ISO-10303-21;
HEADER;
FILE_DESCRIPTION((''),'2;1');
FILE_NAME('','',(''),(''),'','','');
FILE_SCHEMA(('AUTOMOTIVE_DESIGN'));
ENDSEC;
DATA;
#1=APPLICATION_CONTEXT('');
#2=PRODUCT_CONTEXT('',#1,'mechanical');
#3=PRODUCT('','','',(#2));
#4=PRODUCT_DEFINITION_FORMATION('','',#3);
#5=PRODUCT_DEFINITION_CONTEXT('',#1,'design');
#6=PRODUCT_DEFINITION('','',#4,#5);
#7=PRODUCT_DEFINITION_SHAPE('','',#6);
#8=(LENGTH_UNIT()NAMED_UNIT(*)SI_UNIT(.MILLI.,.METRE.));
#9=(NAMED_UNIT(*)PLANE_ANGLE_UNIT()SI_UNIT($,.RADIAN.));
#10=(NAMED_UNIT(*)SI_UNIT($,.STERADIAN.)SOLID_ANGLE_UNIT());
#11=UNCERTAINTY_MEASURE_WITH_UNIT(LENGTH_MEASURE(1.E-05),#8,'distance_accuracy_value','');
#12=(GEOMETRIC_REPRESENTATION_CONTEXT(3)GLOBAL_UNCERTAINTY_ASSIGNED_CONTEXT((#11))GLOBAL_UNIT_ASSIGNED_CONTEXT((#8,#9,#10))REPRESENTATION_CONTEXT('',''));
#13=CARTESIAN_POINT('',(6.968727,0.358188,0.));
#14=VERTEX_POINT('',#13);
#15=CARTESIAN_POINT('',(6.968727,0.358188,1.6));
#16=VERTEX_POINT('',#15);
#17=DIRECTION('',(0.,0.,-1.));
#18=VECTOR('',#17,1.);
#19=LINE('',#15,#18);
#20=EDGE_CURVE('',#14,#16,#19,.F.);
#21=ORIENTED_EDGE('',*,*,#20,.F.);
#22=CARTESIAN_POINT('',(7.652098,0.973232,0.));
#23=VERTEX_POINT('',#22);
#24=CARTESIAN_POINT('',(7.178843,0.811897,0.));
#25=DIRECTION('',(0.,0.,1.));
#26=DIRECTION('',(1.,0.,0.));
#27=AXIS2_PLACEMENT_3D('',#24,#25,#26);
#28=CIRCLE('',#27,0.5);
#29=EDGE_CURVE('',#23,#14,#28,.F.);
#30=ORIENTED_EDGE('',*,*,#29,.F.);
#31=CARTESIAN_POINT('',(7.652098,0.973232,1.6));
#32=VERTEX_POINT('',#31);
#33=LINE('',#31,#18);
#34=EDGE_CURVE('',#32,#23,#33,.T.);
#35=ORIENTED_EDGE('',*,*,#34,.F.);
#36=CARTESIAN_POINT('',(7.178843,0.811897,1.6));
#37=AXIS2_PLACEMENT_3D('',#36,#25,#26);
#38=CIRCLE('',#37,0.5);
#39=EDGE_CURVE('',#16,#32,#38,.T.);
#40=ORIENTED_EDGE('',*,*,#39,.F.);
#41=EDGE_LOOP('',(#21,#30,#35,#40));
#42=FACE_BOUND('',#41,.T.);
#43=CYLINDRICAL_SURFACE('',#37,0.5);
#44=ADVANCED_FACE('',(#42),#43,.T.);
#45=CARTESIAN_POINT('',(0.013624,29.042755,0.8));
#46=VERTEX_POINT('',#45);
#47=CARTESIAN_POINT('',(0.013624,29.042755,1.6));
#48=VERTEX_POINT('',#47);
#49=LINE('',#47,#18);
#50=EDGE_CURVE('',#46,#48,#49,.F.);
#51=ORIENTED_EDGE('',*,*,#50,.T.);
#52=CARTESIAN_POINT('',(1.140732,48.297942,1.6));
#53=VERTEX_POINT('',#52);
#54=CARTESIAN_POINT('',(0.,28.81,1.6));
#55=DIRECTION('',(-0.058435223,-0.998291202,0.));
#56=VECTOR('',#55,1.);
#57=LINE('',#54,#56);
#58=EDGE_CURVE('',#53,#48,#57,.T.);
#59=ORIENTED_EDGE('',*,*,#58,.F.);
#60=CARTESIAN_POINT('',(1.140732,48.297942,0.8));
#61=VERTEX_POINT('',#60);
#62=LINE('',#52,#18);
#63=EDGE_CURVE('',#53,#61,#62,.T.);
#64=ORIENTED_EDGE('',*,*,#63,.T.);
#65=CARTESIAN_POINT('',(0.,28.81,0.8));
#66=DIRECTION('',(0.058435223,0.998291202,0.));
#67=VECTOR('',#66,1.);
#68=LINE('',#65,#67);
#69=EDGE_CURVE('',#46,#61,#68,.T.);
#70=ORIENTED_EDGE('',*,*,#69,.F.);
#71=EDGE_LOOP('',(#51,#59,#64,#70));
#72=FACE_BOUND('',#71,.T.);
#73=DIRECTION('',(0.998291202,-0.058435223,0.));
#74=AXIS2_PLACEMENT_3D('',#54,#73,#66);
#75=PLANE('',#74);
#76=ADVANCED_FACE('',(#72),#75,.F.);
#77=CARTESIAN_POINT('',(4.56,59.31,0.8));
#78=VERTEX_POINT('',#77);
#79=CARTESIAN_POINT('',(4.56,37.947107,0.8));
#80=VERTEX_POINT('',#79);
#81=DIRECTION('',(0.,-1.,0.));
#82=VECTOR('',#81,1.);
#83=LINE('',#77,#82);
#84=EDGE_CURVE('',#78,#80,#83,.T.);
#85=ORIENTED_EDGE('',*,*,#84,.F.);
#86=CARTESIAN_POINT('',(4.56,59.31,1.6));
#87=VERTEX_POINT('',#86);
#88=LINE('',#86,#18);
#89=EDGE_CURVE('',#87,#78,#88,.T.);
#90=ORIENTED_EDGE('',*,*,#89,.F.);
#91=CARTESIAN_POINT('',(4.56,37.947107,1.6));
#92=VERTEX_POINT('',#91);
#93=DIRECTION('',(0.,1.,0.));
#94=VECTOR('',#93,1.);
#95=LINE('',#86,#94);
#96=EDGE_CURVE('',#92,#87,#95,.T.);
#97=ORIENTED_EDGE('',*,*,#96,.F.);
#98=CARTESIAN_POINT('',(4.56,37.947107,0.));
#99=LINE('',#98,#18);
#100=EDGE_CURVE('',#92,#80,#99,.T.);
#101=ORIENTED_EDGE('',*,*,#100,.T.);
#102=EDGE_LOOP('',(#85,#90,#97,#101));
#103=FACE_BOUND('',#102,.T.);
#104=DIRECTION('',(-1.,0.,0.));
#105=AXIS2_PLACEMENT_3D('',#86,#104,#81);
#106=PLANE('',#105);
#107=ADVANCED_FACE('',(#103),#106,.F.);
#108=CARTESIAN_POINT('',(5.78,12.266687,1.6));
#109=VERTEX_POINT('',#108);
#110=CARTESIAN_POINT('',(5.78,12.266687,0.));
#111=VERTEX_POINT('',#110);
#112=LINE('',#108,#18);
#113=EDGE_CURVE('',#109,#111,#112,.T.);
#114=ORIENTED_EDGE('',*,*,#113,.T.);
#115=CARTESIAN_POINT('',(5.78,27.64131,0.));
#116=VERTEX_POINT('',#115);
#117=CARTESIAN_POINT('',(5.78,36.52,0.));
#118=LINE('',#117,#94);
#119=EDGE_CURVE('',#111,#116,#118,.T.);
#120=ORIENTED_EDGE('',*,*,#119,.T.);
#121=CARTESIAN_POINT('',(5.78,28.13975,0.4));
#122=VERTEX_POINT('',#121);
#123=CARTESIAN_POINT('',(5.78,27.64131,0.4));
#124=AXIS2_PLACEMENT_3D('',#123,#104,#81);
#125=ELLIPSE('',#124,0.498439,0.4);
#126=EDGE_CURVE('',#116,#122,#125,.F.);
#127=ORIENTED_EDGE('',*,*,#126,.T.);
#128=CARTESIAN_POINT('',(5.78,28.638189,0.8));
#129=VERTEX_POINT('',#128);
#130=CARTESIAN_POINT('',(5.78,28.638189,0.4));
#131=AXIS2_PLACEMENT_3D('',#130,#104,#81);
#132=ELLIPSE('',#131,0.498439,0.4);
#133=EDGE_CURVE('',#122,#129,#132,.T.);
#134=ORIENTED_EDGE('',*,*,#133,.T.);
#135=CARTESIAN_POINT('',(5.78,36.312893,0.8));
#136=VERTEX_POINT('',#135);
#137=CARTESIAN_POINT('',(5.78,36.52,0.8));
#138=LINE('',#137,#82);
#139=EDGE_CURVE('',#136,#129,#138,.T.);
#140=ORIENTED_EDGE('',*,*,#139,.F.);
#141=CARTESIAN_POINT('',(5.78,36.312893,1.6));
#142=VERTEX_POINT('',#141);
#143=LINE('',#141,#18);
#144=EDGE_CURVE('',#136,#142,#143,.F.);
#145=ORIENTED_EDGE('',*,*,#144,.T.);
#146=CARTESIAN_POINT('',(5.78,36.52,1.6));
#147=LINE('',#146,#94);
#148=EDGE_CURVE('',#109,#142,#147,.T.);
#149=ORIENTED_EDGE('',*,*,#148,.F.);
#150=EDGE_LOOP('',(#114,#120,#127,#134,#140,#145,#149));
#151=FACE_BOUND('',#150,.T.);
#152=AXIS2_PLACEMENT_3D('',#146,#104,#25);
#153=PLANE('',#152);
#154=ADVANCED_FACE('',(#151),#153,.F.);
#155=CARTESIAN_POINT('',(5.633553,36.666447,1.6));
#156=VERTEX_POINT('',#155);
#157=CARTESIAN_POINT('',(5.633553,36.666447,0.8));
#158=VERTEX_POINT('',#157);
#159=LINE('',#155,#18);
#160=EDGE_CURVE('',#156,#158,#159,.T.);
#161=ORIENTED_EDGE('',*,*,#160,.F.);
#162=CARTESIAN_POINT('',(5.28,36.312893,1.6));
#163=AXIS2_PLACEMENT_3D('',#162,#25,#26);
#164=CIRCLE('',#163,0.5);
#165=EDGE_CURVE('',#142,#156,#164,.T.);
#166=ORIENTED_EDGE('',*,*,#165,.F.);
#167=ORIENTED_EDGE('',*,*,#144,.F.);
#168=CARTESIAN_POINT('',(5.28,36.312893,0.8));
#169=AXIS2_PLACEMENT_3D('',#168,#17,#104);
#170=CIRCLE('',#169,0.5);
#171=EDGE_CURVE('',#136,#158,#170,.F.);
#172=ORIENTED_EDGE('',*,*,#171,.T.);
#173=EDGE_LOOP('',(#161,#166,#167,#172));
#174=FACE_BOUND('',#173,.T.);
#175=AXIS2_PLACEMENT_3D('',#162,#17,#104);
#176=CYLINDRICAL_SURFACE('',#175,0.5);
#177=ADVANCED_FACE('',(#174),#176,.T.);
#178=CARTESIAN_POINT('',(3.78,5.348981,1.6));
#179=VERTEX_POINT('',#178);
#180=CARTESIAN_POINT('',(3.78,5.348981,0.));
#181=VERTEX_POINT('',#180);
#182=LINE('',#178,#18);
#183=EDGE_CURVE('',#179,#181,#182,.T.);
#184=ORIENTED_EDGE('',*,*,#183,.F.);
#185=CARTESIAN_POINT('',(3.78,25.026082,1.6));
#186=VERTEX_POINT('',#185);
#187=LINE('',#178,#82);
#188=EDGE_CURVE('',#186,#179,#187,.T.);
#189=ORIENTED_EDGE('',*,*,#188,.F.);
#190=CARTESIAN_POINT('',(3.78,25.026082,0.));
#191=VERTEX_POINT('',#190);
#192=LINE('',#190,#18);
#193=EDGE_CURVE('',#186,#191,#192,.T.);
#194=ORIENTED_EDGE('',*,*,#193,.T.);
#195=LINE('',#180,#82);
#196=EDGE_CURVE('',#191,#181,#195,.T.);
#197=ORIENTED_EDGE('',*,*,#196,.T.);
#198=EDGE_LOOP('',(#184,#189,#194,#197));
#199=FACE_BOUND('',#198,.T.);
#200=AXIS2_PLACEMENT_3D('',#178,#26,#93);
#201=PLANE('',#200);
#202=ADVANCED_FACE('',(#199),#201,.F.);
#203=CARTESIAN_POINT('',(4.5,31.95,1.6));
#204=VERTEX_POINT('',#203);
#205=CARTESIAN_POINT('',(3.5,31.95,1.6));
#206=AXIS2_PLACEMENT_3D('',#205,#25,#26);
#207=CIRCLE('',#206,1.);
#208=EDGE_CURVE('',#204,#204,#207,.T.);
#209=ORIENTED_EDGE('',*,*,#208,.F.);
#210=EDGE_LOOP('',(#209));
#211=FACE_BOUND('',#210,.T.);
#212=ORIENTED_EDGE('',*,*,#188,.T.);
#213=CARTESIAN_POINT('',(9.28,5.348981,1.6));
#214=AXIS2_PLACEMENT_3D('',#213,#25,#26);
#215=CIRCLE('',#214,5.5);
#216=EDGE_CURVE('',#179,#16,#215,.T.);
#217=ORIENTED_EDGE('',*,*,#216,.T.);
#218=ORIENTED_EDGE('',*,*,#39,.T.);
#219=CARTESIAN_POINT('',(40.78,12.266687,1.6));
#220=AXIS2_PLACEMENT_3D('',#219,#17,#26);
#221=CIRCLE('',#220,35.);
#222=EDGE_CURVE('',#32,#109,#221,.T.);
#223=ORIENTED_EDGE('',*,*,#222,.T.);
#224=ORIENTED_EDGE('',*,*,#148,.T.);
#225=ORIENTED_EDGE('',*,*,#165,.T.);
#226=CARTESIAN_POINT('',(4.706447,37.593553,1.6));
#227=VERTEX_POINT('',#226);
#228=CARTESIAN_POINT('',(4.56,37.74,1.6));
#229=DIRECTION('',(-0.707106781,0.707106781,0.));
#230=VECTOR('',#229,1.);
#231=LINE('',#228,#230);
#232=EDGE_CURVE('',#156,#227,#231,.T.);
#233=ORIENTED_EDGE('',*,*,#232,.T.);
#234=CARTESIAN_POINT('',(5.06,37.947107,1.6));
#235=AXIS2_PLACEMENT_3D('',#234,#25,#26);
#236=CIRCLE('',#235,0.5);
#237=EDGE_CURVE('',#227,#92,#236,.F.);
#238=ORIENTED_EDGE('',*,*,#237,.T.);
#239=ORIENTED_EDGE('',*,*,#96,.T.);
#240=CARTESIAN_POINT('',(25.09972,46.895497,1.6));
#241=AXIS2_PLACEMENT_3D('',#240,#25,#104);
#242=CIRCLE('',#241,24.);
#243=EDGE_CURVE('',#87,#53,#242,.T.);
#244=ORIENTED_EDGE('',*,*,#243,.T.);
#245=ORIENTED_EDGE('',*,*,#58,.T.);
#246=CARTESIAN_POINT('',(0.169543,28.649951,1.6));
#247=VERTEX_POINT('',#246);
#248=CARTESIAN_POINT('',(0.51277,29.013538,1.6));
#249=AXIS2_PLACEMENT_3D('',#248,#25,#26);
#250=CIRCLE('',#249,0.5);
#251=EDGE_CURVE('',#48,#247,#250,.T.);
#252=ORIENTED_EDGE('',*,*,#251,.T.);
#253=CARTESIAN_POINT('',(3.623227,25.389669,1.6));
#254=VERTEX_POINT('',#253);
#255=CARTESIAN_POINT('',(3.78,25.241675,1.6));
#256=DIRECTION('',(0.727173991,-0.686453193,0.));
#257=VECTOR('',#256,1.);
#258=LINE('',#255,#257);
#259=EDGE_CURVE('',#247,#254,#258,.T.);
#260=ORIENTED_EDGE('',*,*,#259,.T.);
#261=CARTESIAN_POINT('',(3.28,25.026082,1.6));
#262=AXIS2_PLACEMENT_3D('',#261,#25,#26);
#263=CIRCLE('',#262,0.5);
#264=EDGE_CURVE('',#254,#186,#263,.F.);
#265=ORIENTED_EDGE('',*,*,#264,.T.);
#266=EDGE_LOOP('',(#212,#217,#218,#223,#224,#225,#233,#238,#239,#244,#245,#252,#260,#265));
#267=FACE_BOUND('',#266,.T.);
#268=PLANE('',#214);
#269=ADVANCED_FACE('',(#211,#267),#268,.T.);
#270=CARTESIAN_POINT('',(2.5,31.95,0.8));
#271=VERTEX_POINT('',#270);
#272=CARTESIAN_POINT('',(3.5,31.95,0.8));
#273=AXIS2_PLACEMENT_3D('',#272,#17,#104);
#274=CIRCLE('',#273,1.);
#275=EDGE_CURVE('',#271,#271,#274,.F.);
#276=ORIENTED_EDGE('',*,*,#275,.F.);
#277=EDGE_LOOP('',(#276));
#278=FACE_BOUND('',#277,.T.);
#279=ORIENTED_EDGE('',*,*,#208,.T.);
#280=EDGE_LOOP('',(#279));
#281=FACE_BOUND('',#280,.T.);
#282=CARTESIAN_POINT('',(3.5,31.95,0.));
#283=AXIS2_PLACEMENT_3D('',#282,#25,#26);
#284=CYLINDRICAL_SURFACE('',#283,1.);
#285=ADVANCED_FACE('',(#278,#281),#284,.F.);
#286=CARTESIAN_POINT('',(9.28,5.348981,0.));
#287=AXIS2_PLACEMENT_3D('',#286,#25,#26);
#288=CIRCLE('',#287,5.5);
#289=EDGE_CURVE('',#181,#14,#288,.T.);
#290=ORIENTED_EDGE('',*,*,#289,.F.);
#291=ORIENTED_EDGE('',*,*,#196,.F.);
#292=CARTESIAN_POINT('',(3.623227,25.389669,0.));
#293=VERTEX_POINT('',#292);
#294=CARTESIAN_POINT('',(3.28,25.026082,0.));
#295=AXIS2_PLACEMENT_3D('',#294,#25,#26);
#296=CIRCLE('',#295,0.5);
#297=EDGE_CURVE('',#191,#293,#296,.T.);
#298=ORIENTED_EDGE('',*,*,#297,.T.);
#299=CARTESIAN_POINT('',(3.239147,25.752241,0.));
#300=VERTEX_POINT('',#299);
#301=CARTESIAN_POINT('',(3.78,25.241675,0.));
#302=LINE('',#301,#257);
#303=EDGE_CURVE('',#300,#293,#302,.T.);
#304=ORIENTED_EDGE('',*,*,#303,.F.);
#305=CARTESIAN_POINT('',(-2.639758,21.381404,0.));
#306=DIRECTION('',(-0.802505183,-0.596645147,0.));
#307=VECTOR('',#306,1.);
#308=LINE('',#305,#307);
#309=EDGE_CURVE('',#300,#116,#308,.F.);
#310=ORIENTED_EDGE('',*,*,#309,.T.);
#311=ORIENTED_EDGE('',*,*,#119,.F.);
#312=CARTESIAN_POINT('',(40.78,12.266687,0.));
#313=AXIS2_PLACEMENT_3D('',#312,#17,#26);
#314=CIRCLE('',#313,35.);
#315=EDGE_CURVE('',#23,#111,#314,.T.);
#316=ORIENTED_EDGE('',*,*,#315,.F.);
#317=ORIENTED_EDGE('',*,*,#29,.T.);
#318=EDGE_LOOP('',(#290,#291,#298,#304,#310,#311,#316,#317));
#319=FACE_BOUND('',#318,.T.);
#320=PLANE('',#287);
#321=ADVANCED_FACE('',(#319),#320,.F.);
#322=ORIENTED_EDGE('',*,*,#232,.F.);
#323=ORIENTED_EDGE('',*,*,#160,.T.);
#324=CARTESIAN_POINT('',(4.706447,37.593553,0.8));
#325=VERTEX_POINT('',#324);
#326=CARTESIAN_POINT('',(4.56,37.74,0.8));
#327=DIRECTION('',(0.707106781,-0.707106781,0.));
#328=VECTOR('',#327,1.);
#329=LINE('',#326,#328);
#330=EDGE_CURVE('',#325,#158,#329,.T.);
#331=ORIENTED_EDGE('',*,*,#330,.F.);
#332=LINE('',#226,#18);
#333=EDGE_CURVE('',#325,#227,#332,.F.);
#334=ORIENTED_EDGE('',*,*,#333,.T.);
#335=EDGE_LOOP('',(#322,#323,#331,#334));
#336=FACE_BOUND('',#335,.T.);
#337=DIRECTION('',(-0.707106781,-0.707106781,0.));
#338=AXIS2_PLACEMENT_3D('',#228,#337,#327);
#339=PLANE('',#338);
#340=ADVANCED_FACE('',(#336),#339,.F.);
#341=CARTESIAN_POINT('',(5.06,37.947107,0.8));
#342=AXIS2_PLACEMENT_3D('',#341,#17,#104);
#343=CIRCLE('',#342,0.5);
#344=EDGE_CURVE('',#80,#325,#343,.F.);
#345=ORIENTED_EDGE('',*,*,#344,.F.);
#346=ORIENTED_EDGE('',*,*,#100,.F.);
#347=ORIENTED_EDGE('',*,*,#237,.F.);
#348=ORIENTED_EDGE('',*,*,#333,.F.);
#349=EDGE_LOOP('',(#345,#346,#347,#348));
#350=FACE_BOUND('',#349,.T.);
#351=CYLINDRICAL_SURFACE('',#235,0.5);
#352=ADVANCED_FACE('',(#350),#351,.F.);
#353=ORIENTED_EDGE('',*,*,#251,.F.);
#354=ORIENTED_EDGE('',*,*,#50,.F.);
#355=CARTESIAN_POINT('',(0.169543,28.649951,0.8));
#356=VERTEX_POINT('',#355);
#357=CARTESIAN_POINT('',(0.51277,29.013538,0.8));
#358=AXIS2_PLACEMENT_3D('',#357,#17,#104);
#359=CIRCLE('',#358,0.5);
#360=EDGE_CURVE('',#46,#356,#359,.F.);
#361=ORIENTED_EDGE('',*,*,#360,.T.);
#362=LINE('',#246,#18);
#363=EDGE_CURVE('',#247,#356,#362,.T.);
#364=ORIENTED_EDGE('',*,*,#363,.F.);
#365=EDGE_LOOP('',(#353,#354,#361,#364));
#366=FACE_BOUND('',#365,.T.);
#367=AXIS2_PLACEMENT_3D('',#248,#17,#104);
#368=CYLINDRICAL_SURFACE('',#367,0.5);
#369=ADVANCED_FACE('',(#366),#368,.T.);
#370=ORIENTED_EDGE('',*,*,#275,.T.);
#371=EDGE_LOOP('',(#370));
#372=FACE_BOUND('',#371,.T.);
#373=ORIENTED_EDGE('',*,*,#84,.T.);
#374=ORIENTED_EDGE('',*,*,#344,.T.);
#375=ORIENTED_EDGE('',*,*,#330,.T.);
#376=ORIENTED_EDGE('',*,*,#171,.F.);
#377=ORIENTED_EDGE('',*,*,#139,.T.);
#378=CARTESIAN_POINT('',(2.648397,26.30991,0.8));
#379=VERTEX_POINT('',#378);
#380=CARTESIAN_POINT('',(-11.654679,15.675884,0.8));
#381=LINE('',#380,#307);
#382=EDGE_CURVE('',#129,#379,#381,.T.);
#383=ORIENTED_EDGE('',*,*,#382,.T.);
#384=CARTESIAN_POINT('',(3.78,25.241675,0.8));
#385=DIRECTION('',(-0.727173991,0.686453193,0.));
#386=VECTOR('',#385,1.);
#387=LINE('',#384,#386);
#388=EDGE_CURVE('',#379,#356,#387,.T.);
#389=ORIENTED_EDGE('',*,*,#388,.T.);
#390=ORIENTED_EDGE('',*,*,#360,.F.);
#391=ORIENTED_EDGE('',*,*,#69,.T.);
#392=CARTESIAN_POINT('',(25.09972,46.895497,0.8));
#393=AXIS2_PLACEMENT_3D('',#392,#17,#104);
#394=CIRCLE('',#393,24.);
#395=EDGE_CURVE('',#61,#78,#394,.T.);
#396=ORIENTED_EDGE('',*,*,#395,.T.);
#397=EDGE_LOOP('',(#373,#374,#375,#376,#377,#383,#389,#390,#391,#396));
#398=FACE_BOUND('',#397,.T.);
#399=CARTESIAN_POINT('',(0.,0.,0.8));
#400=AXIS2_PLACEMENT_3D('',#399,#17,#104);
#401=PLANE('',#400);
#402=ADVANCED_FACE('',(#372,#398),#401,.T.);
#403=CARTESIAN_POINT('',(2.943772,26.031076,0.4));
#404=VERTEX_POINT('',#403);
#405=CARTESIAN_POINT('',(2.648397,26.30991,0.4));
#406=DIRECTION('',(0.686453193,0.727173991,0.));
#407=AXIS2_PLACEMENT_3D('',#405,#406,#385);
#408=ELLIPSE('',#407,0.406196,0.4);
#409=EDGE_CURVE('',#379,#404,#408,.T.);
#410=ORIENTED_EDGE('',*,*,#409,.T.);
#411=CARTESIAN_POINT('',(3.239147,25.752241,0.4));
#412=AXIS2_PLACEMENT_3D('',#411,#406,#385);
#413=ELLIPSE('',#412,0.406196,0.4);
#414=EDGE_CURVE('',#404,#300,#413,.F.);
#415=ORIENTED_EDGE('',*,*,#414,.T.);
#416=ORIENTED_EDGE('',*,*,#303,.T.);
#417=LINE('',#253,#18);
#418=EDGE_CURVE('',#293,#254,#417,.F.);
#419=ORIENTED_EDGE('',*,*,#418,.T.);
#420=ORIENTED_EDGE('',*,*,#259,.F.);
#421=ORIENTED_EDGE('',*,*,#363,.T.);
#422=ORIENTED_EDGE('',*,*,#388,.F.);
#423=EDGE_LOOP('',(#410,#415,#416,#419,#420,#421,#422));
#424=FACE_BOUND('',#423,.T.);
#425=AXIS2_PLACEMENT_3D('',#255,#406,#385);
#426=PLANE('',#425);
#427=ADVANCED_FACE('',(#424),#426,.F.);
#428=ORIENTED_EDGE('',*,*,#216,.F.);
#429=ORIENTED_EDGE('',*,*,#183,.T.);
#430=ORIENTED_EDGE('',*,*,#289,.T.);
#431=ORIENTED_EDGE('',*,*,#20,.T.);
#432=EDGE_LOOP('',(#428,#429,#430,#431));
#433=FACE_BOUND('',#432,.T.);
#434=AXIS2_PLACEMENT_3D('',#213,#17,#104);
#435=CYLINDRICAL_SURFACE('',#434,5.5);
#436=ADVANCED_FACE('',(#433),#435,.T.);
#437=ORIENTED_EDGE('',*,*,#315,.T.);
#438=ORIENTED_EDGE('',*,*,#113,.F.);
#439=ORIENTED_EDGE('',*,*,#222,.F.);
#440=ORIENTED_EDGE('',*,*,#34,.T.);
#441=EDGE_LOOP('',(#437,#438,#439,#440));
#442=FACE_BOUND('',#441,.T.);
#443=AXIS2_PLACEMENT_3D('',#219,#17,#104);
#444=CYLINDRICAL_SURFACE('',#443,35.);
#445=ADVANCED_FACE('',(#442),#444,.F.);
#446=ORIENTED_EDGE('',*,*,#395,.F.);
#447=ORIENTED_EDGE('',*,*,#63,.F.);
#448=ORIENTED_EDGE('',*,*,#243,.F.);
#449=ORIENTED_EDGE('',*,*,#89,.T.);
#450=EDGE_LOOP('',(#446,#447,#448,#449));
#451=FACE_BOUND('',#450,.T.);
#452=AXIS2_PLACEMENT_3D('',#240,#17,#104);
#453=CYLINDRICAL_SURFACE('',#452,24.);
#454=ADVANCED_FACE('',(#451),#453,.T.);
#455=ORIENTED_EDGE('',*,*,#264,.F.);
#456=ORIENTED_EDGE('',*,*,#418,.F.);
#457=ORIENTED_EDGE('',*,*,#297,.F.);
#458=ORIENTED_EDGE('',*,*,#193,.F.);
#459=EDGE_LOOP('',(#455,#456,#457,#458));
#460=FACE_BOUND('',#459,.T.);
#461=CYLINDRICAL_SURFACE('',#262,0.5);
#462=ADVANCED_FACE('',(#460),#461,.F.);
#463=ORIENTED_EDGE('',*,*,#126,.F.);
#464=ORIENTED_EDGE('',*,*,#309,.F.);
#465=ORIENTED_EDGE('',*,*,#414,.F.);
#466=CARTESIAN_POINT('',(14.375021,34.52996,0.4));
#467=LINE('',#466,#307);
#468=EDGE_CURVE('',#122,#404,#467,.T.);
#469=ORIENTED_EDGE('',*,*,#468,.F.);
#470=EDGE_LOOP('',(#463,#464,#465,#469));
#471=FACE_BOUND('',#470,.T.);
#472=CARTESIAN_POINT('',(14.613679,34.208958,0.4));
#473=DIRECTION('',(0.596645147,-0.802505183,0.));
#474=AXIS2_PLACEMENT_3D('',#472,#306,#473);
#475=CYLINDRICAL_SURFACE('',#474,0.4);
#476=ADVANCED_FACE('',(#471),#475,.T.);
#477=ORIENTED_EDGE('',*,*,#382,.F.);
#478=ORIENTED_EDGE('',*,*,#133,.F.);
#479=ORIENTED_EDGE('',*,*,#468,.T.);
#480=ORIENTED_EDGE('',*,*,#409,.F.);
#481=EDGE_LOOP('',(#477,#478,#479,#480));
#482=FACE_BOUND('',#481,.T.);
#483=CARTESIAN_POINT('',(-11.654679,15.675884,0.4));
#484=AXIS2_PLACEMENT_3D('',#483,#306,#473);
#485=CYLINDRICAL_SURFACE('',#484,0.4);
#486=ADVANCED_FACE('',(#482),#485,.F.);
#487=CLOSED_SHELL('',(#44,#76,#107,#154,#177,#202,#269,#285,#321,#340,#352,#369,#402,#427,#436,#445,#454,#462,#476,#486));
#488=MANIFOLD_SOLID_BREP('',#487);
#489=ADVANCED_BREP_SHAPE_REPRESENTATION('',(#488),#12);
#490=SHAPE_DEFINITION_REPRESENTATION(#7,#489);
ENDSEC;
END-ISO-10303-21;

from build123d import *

# Parameters (mm, degrees)
BOSS_EXTRUDE1_DEPTH = 1.6
SKETCH2_R           = 1
CUT_EXTRUDE1_DEPTH  = 60.868490043
FILLET1_R           = 0.5
CUT_EXTRUDE3_DEPTH  = 0.8
FILLET2_R           = 0.4


with BuildPart() as part:
    # Sketch1 → Boss-Extrude1 (new body)
    with BuildSketch(Plane.XY):
        with BuildLine():
            Line((3.78, 5.348981211), (3.78, 25.241675085))
            Line((3.78, 25.241675085), (0, 28.81))
            Line((0, 28.81), (1.140731522, 48.297942259))
            ThreePointArc((1.140731522, 48.297942259), (2.179202609, 54.012368785), (4.56, 59.31))
            Line((4.56, 59.31), (4.56, 37.74))
            Line((4.56, 37.74), (5.78, 36.52))
            Line((5.78, 36.52), (5.78, 12.266686594))
            ThreePointArc((5.78, 12.266686594), (6.339471549, 6.033709777), (8, 0))
            ThreePointArc((8, 0), (4.962014359, 1.942369992), (3.78, 5.348981211))
        make_face()
    extrude(amount=BOSS_EXTRUDE1_DEPTH)

    # Sketch2 → Cut-Extrude1 (cut, through all)
    with BuildSketch(Plane.XY.offset(1.6)):
        with Locations((3.5, 31.95)):
            Circle(SKETCH2_R)
    extrude(amount=-CUT_EXTRUDE1_DEPTH, mode=Mode.SUBTRACT)

    # Fillet1
    fillet1_edges = [part.edges().sort_by_distance(p)[0] for p in [
        (3.78, 25.241675085, 0.8),
        (0, 28.81, 0.8),
        (4.56, 37.74, 0.8),
        (5.78, 36.52, 0.8),
        (8, 0, 0.8),
    ]]
    fillet(fillet1_edges, radius=FILLET1_R)

    # Sketch8 → Cut-Extrude3 (cut)
    with BuildSketch(Plane(origin=(0, 0, 0), x_dir=(-1, 0, 0), z_dir=(0, 0, -1))):
        Polygon((-2.943771792, 26.031075601), (11.550433579, 26.031075601), (11.550433579, 65.314635105), (-14.375020628, 65.314635105), (-14.375020628, 34.529960463), align=None)
    extrude(amount=-CUT_EXTRUDE3_DEPTH, mode=Mode.SUBTRACT)

    # Fillet2
    fillet2_edges = [part.edges().sort_by_distance(p)[0] for p in [
        (4.361885896, 27.085412591, 0.8),
        (4.361885896, 27.085412591, 0),
    ]]
    fillet(fillet2_edges, radius=FILLET2_R - 0.0001)  # a hair under: the kernel refuses the full size


solid = part.part
